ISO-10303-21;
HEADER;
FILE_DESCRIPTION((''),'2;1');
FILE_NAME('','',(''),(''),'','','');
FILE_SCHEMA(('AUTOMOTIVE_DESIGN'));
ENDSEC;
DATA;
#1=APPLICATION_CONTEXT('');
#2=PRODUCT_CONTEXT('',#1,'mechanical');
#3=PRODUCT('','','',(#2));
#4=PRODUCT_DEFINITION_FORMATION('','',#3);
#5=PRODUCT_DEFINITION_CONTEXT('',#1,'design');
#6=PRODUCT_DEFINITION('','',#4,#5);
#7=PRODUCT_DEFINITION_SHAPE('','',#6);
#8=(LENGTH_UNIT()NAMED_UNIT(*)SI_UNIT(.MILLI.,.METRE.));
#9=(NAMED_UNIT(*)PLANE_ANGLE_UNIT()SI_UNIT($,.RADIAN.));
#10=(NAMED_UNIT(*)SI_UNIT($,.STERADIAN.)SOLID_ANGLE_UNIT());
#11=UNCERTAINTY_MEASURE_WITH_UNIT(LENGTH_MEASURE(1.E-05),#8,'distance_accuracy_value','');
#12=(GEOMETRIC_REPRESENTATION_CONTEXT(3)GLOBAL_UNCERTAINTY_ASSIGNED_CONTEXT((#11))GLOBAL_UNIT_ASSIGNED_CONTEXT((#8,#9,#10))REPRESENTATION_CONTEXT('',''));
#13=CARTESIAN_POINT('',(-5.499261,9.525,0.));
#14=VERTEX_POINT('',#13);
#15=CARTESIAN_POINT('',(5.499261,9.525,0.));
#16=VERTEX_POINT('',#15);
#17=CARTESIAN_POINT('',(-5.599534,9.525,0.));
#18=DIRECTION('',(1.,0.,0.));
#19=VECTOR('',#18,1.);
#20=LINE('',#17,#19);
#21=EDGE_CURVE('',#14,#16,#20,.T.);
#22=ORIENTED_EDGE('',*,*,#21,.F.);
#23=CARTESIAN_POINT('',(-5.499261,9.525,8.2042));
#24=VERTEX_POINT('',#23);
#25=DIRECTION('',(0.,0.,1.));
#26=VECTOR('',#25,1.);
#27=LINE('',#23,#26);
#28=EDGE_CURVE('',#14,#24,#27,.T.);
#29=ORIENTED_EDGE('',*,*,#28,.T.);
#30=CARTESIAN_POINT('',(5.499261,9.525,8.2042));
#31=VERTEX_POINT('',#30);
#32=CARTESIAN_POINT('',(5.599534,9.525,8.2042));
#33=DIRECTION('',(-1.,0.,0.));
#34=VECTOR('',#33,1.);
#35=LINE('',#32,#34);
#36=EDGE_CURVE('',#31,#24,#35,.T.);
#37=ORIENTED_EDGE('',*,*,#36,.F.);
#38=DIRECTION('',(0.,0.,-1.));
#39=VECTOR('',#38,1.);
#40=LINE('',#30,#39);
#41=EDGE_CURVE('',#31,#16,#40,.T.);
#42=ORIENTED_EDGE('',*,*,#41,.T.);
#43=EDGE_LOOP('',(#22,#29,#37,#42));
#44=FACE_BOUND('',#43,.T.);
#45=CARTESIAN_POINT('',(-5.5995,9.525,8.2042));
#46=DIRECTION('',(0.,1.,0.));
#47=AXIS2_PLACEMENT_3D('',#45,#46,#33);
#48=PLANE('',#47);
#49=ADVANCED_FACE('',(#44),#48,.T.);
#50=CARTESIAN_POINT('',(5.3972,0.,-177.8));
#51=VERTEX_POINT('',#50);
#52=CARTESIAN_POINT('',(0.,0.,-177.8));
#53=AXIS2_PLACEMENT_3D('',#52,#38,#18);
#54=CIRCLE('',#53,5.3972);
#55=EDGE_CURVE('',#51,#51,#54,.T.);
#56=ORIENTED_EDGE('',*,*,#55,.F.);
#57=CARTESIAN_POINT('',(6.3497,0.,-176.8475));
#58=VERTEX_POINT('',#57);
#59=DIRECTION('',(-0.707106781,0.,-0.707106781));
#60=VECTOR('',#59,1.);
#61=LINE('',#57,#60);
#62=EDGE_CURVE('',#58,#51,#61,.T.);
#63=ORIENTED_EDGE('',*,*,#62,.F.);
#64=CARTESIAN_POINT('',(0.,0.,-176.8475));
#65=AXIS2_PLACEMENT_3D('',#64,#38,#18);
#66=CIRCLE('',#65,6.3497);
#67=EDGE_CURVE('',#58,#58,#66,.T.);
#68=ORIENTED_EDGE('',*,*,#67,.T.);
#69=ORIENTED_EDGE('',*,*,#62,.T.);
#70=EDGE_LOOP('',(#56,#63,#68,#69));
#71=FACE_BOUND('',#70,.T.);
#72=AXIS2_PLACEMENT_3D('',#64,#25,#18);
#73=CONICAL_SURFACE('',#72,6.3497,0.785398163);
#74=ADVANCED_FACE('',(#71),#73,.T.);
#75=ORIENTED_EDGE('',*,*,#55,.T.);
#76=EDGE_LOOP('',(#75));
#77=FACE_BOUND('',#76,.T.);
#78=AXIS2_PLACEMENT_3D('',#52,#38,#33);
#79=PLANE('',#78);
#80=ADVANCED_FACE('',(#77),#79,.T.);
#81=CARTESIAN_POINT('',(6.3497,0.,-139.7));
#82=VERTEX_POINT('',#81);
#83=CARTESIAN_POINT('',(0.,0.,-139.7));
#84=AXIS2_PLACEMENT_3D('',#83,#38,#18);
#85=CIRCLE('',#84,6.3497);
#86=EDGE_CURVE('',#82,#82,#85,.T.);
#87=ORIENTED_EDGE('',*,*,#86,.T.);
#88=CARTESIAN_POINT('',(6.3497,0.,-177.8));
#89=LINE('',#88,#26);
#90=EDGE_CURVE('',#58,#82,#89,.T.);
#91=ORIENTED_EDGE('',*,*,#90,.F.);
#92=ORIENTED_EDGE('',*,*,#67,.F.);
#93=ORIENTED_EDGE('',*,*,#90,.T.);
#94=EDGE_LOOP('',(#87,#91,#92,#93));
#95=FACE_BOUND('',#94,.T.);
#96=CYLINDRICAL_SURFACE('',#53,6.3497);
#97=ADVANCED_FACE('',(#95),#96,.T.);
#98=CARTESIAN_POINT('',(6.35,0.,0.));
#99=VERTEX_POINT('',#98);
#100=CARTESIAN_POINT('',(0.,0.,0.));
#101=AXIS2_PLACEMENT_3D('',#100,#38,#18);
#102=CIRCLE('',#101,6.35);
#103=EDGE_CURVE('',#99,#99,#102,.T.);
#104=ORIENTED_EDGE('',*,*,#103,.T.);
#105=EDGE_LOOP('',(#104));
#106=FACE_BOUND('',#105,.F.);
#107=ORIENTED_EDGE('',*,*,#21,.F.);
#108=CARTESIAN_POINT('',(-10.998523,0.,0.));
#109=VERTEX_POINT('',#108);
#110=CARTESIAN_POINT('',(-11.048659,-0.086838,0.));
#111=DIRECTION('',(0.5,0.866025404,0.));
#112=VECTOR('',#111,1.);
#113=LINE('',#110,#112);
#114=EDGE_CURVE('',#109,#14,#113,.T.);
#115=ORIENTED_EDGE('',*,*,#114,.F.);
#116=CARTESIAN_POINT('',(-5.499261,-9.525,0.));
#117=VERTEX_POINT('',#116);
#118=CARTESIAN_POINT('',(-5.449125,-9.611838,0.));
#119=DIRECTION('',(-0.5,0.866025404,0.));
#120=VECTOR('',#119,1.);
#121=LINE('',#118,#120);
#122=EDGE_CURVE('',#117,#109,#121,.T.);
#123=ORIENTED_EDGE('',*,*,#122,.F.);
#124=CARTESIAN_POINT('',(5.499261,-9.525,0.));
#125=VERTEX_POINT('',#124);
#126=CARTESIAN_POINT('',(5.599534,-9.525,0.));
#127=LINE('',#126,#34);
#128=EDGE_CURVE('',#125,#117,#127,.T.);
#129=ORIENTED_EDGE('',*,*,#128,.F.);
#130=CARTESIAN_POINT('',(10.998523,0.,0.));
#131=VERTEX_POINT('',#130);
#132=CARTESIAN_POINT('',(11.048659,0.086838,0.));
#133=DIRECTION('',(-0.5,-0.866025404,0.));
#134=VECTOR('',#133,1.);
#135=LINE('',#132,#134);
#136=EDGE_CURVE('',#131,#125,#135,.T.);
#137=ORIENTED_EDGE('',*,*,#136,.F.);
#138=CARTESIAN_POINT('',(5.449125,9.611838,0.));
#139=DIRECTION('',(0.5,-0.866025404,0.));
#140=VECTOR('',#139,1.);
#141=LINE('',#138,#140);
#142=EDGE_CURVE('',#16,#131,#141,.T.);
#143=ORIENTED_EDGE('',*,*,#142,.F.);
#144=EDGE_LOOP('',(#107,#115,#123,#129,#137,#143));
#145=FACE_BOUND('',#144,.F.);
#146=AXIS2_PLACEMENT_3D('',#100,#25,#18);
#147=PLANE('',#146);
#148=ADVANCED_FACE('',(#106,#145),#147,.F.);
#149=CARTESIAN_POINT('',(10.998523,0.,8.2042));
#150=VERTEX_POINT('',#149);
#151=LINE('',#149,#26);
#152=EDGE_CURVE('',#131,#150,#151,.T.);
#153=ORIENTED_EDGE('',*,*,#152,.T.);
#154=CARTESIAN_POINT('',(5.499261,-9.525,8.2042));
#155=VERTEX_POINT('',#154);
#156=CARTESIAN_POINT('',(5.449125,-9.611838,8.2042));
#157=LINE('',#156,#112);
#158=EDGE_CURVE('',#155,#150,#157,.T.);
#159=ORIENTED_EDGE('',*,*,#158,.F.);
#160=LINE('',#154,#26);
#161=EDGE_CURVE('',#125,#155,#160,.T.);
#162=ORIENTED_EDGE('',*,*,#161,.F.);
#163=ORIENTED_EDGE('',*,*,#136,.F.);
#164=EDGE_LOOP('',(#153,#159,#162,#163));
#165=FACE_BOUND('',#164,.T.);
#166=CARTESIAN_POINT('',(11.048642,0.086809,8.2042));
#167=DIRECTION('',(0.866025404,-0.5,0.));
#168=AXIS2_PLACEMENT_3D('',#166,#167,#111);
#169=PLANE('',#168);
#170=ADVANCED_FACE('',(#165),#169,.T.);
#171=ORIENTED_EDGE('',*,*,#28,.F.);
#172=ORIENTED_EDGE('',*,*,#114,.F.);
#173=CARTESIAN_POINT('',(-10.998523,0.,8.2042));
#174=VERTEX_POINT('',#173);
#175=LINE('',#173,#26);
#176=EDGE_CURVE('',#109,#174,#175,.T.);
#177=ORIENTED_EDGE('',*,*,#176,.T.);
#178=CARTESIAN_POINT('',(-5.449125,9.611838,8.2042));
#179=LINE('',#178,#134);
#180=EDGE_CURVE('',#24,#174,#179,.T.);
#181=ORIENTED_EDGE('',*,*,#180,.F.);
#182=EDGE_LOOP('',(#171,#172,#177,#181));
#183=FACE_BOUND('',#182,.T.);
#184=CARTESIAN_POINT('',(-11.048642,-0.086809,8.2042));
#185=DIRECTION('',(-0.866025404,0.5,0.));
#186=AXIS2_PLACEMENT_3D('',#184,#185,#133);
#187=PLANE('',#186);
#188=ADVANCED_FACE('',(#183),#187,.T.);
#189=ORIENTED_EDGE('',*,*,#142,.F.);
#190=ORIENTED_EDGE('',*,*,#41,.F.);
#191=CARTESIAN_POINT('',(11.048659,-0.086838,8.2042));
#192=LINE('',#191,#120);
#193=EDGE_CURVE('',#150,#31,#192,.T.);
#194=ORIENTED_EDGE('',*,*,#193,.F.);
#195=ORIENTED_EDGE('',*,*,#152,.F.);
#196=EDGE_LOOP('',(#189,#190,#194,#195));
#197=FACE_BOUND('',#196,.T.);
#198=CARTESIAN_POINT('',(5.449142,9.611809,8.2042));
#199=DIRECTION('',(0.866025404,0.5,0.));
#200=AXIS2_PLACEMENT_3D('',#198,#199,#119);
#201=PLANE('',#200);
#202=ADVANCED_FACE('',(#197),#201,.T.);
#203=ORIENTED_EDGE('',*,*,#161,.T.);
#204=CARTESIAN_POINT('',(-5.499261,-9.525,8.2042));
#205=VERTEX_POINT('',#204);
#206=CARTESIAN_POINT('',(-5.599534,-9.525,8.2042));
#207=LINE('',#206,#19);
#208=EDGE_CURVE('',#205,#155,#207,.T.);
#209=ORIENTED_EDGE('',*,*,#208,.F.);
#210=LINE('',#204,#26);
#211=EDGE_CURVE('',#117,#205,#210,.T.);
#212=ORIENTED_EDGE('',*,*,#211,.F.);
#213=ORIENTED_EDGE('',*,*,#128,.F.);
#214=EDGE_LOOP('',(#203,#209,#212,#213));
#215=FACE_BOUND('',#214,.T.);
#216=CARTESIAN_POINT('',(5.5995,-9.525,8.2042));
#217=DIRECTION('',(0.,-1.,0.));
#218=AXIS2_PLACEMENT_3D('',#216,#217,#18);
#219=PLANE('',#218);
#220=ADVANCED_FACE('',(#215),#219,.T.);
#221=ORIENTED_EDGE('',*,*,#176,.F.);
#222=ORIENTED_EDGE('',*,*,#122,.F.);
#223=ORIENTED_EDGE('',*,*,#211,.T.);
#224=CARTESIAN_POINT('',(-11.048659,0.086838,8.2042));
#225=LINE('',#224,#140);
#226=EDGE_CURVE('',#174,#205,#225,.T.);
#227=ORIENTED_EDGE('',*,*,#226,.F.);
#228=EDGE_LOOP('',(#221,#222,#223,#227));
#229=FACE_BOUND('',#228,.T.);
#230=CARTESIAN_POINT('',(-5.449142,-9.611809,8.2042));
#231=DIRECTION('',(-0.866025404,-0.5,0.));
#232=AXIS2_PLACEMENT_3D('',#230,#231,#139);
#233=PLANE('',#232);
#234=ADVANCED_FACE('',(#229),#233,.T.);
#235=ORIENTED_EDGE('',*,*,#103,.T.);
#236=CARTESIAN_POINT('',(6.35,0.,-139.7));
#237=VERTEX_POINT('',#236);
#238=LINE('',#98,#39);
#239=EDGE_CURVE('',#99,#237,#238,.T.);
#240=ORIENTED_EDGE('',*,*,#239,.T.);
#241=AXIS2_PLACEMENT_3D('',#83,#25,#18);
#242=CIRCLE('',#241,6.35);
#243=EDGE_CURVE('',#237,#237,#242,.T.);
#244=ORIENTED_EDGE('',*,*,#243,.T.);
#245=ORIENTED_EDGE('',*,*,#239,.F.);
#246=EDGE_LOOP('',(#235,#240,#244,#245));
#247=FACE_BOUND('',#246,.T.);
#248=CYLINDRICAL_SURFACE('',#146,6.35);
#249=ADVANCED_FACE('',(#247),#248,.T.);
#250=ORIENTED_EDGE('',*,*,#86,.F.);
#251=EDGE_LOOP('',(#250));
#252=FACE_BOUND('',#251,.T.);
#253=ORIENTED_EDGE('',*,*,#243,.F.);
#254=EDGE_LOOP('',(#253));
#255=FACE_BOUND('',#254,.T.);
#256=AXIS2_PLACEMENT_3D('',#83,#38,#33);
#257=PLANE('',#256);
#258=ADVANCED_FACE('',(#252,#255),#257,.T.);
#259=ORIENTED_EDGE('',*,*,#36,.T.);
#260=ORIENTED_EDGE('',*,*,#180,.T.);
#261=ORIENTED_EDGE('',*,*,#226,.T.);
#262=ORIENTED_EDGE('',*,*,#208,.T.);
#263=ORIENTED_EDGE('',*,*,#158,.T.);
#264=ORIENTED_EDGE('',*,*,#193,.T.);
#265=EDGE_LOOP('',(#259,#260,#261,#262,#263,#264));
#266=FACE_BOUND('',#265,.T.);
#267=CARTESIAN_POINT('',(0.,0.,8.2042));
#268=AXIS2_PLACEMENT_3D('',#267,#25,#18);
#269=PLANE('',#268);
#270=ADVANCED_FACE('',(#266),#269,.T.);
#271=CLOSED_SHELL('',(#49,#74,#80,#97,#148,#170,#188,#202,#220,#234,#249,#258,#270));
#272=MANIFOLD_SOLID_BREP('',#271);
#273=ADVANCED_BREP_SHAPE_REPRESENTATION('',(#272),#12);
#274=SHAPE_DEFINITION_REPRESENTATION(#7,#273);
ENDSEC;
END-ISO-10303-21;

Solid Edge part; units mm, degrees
sketch "Sketch1" plane through (0, 0, 0) normal (0, 0, 1) x (1, 0, 0)
  circle A0 centre (0, 0) radius 11.049
  dimension "D1" = 22.098
extrude "Protrusion1" add sketch "Sketch1" along normal blind 8.2042
sketch "Sketch2" plane through (0, 0, 0) normal (0, 0, -1) x (1, 0, 0)
  circle A0 centre (0, 0) radius 6.35
extrude "Protrusion2" add sketch "Sketch2" along normal blind 177.8
sketch "Sketch3" plane through (0, 0, -177.8) normal (0, 0, -1) x (1, 0, 0)
  circle A0 centre (0, 0) radius 6.3497
extrude "Cutout1" cut sketch "Sketch3" against normal blind 38.1 flip side to cut
chamfer "Chamfer_1" distance 0.9525 angle 45 1 edges at (-6.3497, 0, -177.8)
sketch "Sketch4" plane through (0, 0, 8.2042) normal (0, 0, 1) x (1, 0, 0)
  line L0 (-5.5995, 9.525) -> (5.5995, 9.525)
  dimension "D1" = 19.05
extrude "Cutout2" cut sketch "Sketch4" against normal up to next material side at (0, 9.575, 8.2042)
pattern_circular "Pattern1" count 6 over 360 about axis through (0, 0, 8.2042) along (0, 0, 1) of "Cutout2"
properties part number "24109127"
